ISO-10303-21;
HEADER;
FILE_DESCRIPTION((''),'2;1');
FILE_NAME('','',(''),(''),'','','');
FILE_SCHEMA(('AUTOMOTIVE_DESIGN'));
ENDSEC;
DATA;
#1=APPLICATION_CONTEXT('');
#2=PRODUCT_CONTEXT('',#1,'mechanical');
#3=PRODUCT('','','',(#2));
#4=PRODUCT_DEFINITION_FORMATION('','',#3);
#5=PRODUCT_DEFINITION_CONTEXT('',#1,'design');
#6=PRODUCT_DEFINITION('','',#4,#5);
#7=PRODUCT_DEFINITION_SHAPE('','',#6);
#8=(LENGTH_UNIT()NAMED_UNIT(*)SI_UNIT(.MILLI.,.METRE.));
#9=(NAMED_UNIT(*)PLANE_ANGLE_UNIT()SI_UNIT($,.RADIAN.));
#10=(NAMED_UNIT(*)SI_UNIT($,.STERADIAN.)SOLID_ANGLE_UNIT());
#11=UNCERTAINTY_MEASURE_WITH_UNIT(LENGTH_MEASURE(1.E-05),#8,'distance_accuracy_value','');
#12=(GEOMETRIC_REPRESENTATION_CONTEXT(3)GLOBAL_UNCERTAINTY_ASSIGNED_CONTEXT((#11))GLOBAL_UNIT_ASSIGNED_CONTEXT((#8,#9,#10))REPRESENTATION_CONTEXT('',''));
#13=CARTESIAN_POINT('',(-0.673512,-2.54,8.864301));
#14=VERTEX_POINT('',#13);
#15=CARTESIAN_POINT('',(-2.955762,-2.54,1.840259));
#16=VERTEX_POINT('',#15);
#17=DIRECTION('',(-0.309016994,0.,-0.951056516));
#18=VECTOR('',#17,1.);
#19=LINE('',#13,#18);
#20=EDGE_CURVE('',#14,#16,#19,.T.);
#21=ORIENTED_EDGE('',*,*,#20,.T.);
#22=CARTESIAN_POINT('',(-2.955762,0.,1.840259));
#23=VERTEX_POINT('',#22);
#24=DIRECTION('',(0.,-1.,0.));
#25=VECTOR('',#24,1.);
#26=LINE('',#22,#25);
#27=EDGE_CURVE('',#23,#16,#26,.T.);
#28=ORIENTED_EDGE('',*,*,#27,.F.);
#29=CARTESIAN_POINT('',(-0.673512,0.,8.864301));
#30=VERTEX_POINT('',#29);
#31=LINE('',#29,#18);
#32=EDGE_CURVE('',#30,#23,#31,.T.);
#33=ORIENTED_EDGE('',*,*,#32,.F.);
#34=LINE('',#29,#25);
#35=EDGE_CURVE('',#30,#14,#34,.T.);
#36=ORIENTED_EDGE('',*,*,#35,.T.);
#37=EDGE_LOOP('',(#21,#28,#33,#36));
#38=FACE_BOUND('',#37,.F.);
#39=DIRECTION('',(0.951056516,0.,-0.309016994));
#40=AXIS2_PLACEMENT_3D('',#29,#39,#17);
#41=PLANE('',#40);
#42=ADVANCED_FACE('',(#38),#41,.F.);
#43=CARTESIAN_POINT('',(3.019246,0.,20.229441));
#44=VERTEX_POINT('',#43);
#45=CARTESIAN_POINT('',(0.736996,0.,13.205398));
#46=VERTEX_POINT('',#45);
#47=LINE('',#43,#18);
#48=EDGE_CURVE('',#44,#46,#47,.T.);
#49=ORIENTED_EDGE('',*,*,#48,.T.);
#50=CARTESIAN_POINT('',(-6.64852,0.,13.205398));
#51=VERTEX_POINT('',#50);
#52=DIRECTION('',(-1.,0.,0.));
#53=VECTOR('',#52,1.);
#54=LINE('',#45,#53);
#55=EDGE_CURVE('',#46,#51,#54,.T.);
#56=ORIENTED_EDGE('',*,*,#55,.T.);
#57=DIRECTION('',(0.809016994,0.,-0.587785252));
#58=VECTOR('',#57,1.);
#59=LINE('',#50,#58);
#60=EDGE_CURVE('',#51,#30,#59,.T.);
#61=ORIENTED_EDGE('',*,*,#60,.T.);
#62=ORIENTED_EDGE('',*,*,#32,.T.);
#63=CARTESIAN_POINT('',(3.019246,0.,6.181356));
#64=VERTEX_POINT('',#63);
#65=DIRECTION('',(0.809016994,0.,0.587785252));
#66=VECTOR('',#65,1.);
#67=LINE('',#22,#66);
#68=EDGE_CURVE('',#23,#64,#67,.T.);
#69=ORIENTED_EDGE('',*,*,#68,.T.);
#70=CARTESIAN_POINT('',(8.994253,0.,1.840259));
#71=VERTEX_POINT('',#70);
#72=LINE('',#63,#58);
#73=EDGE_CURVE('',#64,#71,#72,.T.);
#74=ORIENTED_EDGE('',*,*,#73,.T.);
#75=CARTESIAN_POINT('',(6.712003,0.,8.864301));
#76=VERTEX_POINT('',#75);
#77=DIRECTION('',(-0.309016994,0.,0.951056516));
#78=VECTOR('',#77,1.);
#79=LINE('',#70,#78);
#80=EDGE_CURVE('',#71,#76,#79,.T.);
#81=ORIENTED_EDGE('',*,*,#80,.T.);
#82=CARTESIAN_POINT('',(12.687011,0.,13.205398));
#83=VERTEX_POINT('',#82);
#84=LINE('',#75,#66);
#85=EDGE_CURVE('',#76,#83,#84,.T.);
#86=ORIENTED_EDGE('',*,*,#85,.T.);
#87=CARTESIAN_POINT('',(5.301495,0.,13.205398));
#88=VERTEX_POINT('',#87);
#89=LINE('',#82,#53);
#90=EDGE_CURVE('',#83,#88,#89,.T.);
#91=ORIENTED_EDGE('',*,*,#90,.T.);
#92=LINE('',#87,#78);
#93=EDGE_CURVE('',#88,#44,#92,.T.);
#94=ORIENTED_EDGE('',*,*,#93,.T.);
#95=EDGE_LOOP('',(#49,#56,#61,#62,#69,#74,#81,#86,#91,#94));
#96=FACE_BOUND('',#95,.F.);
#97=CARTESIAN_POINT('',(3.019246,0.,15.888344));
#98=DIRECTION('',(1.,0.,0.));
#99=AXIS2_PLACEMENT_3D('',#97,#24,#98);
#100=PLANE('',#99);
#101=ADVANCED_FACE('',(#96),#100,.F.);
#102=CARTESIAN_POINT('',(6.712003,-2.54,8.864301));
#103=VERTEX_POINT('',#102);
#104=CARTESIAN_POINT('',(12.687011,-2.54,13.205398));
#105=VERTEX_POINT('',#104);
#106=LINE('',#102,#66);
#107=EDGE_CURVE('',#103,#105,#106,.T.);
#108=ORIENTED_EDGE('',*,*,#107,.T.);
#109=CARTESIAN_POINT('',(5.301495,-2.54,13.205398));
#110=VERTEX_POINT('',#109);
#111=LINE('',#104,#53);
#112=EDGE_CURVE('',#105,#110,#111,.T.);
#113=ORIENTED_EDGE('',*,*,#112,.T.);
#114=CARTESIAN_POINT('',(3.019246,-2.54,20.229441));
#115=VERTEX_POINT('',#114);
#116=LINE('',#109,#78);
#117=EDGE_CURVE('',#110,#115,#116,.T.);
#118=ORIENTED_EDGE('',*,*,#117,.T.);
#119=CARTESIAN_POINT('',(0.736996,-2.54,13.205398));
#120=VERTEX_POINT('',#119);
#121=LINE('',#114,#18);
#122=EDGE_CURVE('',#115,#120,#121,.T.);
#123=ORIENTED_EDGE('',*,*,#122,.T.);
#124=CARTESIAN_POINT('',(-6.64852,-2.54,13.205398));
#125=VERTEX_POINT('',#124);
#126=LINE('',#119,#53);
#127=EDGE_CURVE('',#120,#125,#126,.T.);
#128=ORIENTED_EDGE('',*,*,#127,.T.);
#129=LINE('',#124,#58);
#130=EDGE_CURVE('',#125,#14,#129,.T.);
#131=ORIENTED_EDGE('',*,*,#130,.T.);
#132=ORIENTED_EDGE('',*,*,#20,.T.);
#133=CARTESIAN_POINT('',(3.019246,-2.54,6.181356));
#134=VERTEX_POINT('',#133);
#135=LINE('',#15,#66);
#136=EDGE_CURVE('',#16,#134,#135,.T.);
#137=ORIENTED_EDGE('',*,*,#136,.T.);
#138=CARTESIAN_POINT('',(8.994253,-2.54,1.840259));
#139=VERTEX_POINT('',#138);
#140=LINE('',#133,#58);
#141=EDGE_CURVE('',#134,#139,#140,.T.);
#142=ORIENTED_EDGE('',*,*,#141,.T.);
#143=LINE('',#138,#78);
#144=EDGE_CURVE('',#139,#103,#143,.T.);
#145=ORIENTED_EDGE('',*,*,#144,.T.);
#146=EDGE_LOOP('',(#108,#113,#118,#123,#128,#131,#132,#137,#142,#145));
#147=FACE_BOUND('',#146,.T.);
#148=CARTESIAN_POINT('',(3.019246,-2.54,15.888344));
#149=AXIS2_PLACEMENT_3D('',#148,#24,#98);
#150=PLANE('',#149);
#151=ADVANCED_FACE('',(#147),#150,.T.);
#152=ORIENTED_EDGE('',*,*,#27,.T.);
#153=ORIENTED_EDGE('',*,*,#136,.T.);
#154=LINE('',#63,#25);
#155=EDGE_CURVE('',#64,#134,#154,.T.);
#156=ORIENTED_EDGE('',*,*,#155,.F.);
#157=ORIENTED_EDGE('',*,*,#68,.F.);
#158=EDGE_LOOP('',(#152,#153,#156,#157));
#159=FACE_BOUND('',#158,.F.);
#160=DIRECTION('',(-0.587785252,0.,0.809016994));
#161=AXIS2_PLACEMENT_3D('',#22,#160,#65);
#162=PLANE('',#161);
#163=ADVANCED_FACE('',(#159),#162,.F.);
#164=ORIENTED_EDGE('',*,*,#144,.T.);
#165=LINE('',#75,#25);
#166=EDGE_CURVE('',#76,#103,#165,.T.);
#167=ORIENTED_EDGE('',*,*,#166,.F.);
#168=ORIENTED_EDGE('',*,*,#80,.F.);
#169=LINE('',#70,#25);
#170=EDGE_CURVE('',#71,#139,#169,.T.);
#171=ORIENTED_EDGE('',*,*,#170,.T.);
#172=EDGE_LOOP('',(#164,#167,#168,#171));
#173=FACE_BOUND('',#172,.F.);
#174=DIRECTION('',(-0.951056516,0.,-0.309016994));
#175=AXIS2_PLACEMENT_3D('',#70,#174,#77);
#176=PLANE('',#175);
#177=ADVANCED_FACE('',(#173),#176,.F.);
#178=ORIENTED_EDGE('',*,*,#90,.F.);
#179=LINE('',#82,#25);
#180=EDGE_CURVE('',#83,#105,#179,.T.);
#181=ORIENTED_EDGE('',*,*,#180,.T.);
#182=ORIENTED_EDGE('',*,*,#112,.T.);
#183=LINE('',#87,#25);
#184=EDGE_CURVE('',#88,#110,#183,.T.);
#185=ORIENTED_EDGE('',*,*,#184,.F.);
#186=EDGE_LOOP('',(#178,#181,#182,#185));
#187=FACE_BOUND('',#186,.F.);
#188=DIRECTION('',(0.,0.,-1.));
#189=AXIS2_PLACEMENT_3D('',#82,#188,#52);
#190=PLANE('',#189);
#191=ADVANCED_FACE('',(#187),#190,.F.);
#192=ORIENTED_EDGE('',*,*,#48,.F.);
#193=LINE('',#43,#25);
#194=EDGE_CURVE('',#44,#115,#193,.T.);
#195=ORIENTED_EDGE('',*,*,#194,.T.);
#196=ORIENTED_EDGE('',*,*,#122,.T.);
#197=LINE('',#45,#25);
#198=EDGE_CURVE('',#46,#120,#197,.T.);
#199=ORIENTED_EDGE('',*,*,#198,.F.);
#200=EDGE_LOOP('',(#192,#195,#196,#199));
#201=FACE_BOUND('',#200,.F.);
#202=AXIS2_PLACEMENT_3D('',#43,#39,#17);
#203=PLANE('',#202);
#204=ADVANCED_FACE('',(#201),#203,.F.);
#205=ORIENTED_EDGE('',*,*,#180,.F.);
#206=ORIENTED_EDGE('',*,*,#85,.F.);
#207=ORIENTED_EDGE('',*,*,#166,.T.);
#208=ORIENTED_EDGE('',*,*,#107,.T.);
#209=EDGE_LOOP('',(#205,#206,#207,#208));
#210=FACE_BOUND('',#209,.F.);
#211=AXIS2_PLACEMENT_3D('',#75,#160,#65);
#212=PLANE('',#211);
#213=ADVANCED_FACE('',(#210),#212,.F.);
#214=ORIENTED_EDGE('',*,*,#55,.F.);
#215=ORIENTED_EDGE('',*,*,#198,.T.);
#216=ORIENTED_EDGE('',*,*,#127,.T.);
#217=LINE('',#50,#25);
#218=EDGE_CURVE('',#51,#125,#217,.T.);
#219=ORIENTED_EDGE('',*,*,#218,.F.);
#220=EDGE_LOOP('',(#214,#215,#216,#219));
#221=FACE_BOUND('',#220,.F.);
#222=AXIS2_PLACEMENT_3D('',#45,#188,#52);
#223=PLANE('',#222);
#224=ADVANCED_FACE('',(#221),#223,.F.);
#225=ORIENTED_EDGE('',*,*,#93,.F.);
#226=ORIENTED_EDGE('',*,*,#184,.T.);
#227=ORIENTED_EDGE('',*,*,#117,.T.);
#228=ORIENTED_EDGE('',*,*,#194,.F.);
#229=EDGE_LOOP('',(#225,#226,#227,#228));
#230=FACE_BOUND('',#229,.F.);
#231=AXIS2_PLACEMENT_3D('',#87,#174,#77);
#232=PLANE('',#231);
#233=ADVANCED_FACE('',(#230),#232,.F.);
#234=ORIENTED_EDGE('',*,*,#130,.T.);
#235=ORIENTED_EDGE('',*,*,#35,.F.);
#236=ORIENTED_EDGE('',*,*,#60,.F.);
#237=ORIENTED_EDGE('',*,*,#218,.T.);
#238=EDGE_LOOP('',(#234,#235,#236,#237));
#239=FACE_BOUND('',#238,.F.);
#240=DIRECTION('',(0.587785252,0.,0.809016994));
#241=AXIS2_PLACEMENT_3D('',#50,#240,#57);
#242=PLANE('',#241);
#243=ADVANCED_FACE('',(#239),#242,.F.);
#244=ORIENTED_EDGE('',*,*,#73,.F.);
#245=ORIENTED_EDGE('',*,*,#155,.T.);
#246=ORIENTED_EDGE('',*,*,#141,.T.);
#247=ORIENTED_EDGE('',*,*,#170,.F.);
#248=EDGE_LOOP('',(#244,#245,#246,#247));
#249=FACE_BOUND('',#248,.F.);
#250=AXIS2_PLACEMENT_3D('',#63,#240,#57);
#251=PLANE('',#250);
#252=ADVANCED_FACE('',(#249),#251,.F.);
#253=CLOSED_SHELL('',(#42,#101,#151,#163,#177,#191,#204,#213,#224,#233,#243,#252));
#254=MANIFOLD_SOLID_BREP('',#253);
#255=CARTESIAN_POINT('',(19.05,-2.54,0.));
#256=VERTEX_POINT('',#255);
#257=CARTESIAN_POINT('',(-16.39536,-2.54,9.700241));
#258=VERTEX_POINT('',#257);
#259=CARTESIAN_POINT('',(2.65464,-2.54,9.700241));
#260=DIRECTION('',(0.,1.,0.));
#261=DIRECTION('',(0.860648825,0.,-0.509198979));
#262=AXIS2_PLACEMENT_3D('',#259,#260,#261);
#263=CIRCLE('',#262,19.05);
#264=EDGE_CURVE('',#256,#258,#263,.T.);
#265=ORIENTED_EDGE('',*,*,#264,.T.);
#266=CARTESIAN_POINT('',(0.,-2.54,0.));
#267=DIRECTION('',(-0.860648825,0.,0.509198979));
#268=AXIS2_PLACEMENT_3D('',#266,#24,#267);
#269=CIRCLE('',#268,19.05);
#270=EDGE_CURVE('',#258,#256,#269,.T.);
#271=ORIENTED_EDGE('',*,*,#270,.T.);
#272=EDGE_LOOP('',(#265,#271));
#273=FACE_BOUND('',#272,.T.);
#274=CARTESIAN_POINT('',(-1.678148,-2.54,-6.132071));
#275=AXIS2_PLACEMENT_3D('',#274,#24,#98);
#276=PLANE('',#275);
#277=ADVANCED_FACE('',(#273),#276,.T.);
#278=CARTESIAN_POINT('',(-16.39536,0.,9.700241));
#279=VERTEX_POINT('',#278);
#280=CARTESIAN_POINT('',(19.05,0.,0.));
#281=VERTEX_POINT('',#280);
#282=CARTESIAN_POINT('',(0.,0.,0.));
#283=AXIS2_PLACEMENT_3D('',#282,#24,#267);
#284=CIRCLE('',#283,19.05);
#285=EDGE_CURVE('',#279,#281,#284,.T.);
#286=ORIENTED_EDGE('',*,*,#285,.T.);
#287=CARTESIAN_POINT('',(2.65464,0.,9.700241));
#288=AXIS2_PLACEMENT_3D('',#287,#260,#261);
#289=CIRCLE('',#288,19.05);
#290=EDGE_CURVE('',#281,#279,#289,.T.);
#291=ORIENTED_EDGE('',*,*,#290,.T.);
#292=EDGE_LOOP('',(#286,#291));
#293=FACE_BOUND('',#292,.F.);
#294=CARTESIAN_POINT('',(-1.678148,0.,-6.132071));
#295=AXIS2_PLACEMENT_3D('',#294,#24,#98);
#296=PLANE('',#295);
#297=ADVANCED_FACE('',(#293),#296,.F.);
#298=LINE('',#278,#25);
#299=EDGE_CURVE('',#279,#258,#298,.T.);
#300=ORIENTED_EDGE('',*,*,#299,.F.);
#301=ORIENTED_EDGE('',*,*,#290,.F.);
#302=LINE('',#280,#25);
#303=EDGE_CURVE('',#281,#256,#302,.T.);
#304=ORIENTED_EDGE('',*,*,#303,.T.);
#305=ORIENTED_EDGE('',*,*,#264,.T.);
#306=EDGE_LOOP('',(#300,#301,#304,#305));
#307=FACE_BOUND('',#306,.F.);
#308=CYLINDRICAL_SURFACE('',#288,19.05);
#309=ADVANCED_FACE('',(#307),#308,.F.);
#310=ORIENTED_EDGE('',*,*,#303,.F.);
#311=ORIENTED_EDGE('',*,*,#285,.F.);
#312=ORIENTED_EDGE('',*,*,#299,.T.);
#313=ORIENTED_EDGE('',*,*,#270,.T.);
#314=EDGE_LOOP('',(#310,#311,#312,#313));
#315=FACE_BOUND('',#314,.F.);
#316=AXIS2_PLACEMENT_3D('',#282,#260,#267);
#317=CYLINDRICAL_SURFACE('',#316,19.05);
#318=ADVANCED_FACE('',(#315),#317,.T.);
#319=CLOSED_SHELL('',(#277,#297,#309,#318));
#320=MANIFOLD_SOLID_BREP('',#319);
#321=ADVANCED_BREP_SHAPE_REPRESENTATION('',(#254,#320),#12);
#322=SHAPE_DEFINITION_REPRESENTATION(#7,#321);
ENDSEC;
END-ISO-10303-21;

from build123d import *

# Parameters (mm, degrees)
F1_DEPTH = 2.54
F3_DEPTH = 2.54


with BuildPart() as f1:
    # F0 (on Front) → F1 (new body)
    with BuildSketch(Plane.XZ):
        with BuildLine():
            ThreePointArc((-16.3953601137, 9.7002405508), (-5.0284634748, -18.3743586305), (19.05, 0))
            ThreePointArc((19.05, 0), (-2.3738235885, -8.6741180797), (-16.3953601137, 9.7002405508))
        make_face()
    extrude(amount=F1_DEPTH)


with BuildPart() as f3:
    # F2 (on Front) → F3 (new body)
    with BuildSketch(Plane.XZ):
        Polygon((5.3014953599, 13.205398481), (3.0192455743, 20.2294410739), (0.7369957886, 13.205398481), align=None)
        Polygon((0.7369957886, 13.205398481), (-6.6485196593, 13.205398481), (-0.6735121497, 8.8643014201), align=None)
        Polygon((3.0192455743, 6.1813558881), (6.7120032982, 8.8643014201), (5.3014953599, 13.205398481), (0.7369957886, 13.205398481), (-0.6735121497, 8.8643014201), align=None)
        Polygon((6.7120032982, 8.8643014201), (12.6870108078, 13.205398481), (5.3014953599, 13.205398481), align=None)
        Polygon((3.0192455743, 6.1813558881), (8.9942530838, 1.8402588272), (6.7120032982, 8.8643014201), align=None)
        Polygon((-0.6735121497, 8.8643014201), (-2.9557619353, 1.8402588272), (3.0192455743, 6.1813558881), align=None)
    extrude(amount=F3_DEPTH)


solid = Compound([f1.part, f3.part])
